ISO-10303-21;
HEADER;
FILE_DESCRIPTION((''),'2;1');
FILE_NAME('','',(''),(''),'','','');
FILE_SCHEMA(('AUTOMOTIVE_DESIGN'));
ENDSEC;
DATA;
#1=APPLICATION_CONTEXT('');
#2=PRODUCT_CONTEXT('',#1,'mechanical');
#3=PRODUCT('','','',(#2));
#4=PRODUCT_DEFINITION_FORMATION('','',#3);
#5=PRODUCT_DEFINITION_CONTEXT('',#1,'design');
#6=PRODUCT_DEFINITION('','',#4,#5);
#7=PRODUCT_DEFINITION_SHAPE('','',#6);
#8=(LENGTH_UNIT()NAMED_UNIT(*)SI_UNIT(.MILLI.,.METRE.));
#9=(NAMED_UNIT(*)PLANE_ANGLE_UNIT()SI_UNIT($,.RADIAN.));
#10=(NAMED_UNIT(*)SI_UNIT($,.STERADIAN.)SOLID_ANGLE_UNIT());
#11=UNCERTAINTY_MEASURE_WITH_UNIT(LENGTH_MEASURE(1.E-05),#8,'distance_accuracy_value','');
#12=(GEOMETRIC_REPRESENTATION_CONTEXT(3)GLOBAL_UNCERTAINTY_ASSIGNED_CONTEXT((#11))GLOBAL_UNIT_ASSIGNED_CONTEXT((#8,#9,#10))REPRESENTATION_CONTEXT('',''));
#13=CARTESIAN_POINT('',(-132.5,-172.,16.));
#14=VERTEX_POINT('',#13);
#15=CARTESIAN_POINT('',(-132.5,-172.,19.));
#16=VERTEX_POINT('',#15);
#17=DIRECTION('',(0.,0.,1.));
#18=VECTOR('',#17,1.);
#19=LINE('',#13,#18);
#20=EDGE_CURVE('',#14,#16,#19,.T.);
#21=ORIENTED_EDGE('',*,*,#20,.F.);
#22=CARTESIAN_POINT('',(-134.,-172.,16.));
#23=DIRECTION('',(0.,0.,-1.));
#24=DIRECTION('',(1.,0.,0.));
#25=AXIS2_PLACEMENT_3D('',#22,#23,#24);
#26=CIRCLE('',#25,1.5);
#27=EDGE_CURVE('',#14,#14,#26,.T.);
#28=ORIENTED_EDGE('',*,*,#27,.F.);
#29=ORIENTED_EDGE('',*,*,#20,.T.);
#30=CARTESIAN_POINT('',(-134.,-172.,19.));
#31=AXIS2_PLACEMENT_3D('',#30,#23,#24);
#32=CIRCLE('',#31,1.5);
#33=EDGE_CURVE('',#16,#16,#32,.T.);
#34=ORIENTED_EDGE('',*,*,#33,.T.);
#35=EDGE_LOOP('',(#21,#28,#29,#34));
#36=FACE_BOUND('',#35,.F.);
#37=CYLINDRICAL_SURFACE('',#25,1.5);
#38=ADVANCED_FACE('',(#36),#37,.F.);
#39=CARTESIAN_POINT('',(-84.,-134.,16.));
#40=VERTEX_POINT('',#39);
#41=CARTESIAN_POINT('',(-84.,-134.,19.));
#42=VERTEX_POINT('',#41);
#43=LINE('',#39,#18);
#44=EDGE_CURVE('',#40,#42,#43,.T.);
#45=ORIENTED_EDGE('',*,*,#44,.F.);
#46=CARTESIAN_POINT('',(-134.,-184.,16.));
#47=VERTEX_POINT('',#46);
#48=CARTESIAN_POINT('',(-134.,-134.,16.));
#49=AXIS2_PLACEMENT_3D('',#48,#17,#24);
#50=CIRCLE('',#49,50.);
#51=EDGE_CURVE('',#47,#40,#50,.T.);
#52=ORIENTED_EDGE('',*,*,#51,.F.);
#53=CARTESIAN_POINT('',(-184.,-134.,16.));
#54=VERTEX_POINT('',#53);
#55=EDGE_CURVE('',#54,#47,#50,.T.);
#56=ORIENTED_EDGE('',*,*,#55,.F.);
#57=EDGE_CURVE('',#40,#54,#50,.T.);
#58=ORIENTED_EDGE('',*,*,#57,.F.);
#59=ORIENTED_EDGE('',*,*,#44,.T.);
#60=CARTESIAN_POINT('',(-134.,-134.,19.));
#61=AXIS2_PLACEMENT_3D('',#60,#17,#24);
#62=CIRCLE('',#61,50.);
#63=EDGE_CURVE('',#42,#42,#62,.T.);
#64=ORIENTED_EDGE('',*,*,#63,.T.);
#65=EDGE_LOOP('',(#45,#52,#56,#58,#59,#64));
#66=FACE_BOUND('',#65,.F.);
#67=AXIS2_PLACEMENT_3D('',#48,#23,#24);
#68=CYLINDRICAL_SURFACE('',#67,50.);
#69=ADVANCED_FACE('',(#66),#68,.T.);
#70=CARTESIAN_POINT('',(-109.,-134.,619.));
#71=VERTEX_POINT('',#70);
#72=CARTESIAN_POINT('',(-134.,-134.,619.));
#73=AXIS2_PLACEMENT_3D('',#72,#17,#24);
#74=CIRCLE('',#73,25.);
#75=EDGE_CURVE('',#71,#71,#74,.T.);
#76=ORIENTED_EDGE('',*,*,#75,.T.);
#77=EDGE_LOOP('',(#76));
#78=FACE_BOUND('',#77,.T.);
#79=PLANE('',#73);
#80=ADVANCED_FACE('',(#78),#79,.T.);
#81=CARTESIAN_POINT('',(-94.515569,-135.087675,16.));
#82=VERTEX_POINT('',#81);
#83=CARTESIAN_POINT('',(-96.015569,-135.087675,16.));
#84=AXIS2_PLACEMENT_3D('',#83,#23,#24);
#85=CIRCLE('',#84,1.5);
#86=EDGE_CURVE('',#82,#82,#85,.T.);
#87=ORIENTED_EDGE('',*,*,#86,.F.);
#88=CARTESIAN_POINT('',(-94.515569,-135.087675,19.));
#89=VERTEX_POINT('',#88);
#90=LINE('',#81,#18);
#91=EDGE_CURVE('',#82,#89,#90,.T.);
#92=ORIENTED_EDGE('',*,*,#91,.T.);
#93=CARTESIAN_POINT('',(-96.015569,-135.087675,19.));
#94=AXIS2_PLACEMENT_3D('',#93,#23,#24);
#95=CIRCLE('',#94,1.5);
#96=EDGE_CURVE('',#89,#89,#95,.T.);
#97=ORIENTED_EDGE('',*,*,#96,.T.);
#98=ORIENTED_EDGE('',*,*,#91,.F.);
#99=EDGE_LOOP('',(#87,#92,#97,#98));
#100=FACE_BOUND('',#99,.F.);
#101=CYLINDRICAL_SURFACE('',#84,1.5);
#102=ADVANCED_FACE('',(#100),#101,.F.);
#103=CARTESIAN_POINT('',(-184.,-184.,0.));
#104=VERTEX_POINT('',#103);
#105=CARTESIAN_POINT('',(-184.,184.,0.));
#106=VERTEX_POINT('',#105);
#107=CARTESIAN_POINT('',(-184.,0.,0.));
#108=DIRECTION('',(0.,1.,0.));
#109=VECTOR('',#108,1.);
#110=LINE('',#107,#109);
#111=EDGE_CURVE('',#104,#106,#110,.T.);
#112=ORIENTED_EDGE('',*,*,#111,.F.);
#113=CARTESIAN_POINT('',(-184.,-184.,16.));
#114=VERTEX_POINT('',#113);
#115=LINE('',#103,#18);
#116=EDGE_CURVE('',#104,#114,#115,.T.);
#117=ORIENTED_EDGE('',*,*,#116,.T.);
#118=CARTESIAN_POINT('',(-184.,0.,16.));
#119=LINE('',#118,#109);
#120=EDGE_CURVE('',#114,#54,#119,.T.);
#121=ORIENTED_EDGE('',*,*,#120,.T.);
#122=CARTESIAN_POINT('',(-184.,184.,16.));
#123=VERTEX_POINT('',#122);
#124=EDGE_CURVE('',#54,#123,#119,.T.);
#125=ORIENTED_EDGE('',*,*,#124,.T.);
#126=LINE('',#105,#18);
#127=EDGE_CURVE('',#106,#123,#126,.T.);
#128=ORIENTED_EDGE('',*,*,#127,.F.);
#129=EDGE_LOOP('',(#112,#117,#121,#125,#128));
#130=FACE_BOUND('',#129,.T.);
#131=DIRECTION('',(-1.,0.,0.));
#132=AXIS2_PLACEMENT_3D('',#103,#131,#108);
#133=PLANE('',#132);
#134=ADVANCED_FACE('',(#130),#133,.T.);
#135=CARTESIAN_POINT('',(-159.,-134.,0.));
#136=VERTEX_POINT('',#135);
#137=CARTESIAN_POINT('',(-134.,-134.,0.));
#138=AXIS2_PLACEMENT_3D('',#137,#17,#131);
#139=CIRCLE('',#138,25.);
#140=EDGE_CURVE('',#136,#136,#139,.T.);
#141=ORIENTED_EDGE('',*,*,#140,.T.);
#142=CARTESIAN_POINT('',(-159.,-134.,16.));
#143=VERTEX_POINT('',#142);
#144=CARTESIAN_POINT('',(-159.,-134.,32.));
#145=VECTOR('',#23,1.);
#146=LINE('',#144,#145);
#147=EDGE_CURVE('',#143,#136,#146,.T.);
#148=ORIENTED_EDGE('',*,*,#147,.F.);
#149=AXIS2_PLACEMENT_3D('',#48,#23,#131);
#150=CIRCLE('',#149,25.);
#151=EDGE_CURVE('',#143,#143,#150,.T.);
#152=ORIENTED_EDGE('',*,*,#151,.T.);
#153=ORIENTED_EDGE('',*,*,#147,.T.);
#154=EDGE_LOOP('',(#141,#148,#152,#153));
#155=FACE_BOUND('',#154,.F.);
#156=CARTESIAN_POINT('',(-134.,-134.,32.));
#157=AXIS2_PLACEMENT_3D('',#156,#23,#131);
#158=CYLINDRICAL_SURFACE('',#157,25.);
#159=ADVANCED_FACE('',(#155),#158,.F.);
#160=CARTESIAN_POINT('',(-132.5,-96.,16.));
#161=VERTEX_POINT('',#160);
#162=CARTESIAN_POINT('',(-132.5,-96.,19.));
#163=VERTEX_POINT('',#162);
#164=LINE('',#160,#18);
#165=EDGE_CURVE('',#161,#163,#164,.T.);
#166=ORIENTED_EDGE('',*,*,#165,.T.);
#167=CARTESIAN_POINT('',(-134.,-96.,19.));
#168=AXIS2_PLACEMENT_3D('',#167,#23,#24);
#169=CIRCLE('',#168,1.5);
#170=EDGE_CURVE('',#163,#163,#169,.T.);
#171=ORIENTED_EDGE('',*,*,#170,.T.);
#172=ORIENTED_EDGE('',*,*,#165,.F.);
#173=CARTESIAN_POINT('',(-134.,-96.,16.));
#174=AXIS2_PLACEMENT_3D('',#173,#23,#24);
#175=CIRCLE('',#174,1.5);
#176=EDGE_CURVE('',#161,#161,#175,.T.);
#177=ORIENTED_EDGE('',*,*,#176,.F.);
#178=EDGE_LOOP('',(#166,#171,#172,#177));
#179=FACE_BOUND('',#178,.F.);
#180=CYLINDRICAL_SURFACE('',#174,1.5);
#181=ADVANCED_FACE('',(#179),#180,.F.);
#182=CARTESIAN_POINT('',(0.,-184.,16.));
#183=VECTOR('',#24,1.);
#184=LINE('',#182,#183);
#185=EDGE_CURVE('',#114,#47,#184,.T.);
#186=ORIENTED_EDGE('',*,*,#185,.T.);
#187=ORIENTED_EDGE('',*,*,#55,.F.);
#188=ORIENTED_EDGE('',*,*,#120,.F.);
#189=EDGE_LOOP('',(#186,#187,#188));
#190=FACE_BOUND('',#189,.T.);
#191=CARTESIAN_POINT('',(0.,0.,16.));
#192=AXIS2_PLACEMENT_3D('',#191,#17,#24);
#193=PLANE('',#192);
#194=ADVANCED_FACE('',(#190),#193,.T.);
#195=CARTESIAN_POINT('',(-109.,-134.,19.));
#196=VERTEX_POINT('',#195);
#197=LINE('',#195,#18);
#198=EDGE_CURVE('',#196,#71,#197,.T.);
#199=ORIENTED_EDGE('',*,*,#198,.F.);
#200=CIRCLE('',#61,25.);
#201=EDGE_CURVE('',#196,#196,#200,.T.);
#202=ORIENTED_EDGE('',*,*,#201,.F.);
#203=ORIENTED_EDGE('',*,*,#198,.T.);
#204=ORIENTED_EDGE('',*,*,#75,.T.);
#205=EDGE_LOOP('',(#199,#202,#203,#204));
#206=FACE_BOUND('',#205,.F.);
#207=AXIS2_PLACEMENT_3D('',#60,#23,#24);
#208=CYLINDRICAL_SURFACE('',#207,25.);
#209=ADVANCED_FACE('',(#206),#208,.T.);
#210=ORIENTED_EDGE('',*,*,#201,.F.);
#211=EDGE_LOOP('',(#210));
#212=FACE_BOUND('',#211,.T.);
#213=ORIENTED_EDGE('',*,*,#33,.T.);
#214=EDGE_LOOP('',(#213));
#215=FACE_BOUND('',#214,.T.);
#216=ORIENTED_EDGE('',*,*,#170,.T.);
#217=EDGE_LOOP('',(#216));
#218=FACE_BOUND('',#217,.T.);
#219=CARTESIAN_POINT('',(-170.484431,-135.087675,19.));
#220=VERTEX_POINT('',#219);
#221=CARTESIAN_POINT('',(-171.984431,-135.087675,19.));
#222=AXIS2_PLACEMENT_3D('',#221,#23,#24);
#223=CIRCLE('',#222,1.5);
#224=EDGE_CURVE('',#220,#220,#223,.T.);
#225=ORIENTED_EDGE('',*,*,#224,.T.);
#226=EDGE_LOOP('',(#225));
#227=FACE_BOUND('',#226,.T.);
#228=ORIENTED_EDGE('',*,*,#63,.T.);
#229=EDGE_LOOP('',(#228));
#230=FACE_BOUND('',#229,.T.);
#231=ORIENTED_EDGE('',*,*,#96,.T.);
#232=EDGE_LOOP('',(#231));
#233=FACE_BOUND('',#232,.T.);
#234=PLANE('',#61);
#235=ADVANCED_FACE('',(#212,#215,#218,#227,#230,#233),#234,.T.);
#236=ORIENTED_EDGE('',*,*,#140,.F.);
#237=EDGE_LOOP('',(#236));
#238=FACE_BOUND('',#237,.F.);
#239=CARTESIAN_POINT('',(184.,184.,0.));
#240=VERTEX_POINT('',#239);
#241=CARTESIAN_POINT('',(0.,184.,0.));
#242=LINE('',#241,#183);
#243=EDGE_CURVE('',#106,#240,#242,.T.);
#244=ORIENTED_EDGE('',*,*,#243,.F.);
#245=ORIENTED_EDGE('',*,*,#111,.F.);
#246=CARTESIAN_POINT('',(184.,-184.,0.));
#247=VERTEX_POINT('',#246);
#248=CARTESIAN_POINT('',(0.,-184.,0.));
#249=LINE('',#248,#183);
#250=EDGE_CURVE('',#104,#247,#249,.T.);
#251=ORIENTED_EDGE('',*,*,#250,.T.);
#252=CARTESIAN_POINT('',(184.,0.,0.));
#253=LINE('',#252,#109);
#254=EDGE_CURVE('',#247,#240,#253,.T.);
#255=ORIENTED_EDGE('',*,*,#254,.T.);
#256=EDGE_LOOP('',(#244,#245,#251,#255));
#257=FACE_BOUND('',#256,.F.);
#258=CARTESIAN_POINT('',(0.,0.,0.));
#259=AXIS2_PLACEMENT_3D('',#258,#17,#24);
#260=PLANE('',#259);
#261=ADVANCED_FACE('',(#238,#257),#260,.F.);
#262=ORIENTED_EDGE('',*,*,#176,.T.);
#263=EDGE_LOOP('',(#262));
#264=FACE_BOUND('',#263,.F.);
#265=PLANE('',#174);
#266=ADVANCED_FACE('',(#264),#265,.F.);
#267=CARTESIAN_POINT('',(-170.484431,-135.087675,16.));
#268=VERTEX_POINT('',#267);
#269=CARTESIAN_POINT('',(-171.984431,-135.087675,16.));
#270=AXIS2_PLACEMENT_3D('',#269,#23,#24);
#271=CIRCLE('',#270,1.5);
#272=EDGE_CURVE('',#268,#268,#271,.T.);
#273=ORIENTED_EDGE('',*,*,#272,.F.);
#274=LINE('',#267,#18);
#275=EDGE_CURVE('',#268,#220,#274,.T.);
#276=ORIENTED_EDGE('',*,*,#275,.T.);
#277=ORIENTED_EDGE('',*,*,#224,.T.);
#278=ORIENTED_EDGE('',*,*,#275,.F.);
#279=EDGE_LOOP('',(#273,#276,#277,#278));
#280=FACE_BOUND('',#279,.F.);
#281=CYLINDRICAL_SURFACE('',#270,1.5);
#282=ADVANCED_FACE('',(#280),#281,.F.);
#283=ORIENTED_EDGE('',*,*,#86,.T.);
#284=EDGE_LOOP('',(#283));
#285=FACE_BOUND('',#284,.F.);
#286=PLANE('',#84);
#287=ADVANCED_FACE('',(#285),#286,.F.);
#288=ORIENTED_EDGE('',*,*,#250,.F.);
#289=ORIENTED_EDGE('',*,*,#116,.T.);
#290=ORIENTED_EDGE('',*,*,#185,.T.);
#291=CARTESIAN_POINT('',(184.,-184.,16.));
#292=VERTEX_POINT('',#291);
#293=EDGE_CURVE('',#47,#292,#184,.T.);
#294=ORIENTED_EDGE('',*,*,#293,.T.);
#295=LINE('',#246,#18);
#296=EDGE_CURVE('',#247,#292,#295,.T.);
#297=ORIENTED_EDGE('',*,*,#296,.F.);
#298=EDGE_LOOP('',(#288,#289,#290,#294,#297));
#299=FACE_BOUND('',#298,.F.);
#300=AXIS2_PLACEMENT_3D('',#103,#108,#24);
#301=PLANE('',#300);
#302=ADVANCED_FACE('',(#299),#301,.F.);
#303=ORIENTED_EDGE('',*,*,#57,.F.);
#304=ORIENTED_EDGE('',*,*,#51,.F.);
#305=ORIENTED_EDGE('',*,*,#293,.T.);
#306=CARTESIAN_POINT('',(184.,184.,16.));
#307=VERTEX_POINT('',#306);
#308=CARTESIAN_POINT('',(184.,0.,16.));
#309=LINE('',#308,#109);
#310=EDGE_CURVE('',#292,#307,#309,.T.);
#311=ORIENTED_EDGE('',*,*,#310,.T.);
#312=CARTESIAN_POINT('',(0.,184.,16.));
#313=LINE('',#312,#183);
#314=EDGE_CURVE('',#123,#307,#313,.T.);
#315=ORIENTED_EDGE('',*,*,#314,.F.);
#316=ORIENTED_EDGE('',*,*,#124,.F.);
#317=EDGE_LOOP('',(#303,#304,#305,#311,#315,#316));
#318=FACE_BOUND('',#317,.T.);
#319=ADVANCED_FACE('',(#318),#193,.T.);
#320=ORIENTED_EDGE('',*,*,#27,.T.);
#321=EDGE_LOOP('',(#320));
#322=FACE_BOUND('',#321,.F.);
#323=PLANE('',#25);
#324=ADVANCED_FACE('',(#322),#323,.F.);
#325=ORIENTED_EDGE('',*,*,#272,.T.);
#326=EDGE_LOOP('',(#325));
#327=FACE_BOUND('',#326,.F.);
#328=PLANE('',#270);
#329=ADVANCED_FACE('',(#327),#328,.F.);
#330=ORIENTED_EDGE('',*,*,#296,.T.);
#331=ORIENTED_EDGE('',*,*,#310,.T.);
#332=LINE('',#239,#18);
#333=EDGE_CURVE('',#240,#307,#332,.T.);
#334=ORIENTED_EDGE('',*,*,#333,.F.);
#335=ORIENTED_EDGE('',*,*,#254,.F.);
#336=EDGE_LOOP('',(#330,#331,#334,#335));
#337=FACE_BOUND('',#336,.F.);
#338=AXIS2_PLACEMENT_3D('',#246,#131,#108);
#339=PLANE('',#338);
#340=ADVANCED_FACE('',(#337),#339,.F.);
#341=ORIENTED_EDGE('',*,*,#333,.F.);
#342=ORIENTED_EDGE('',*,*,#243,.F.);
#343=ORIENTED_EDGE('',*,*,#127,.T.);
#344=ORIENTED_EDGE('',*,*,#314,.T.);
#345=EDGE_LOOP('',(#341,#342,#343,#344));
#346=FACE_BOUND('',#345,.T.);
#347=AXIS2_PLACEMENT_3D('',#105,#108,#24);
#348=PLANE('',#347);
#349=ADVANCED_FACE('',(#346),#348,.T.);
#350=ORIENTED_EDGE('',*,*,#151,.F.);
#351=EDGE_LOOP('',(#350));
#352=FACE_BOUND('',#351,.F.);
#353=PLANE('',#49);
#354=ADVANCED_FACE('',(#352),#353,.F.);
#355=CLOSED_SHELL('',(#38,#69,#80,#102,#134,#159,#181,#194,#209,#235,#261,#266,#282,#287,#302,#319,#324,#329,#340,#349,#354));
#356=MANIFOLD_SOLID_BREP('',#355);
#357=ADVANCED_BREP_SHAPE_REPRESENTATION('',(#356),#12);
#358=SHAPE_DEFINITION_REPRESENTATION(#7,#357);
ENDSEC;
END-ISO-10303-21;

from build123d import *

# Parameters (mm, degrees)
F0_W     = 368
F0_H     = 368
F1_DEPTH = 16
F3_D     = 50
F3_DEPTH = 16
F3_TIP   = 15.0215154757
F2_R     = 50
F4_DEPTH = 3
F7_R     = 25
F8_DEPTH = 600
F9_D     = 3
F9_DEPTH = 3
F9_TIP   = 0.9012909285


# Not quite as in the source:
# - the program builds the solid bodies; features that only make, move or delete a surface that nothing else refers to are left out


with BuildPart() as f1:
    # F0 (on Top) → F1 (new body)
    with BuildSketch(Plane.XY):
        Rectangle(F0_W, F0_H)
    extrude(amount=F1_DEPTH)

    # F3
    with Locations(Plane.XY.offset(16)):
        with Locations((-134, -134)):
            Hole(F3_D / 2, depth=F3_DEPTH)
            with Locations((0, 0, -(F3_DEPTH + F3_TIP / 2))):  # 118° drill point
                Cone(0, F3_D / 2, F3_TIP, mode=Mode.SUBTRACT)

    # F2 (on face) → F4 (join)
    with BuildSketch(Plane.XY.offset(16)):
        with Locations((-134, -134)):
            Circle(F2_R)
    extrude(amount=F4_DEPTH)

    # F7 (on face) → F8 (join)
    with BuildSketch(Plane.XY.offset(19)):
        with Locations((-134, -134)):
            Circle(F7_R)
    extrude(amount=F8_DEPTH)

    # F9 (one way)
    with BuildSketch(Plane(origin=(0, 0, 16), x_dir=(1, 0, 0), z_dir=(0, 0, -1))):
        with Locations((-134, 96), (-171.9844305378, 135.0876749154), (-96.0155694622, 135.0876749154), (-134, 172)):
            Circle(F9_D / 2)
    extrude(amount=-F9_DEPTH, mode=Mode.SUBTRACT)
    with Locations(Plane(origin=(0, 0, 16), x_dir=(1, 0, 0), z_dir=(0, 0, -1))):
        with Locations((-134, 96), (-171.9844305378, 135.0876749154), (-96.0155694622, 135.0876749154), (-134, 172)):
            with Locations((0, 0, -(F9_DEPTH + F9_TIP / 2))):  # 118° drill point
                Cone(0, F9_D / 2, F9_TIP, mode=Mode.SUBTRACT)


solid = f1.part
